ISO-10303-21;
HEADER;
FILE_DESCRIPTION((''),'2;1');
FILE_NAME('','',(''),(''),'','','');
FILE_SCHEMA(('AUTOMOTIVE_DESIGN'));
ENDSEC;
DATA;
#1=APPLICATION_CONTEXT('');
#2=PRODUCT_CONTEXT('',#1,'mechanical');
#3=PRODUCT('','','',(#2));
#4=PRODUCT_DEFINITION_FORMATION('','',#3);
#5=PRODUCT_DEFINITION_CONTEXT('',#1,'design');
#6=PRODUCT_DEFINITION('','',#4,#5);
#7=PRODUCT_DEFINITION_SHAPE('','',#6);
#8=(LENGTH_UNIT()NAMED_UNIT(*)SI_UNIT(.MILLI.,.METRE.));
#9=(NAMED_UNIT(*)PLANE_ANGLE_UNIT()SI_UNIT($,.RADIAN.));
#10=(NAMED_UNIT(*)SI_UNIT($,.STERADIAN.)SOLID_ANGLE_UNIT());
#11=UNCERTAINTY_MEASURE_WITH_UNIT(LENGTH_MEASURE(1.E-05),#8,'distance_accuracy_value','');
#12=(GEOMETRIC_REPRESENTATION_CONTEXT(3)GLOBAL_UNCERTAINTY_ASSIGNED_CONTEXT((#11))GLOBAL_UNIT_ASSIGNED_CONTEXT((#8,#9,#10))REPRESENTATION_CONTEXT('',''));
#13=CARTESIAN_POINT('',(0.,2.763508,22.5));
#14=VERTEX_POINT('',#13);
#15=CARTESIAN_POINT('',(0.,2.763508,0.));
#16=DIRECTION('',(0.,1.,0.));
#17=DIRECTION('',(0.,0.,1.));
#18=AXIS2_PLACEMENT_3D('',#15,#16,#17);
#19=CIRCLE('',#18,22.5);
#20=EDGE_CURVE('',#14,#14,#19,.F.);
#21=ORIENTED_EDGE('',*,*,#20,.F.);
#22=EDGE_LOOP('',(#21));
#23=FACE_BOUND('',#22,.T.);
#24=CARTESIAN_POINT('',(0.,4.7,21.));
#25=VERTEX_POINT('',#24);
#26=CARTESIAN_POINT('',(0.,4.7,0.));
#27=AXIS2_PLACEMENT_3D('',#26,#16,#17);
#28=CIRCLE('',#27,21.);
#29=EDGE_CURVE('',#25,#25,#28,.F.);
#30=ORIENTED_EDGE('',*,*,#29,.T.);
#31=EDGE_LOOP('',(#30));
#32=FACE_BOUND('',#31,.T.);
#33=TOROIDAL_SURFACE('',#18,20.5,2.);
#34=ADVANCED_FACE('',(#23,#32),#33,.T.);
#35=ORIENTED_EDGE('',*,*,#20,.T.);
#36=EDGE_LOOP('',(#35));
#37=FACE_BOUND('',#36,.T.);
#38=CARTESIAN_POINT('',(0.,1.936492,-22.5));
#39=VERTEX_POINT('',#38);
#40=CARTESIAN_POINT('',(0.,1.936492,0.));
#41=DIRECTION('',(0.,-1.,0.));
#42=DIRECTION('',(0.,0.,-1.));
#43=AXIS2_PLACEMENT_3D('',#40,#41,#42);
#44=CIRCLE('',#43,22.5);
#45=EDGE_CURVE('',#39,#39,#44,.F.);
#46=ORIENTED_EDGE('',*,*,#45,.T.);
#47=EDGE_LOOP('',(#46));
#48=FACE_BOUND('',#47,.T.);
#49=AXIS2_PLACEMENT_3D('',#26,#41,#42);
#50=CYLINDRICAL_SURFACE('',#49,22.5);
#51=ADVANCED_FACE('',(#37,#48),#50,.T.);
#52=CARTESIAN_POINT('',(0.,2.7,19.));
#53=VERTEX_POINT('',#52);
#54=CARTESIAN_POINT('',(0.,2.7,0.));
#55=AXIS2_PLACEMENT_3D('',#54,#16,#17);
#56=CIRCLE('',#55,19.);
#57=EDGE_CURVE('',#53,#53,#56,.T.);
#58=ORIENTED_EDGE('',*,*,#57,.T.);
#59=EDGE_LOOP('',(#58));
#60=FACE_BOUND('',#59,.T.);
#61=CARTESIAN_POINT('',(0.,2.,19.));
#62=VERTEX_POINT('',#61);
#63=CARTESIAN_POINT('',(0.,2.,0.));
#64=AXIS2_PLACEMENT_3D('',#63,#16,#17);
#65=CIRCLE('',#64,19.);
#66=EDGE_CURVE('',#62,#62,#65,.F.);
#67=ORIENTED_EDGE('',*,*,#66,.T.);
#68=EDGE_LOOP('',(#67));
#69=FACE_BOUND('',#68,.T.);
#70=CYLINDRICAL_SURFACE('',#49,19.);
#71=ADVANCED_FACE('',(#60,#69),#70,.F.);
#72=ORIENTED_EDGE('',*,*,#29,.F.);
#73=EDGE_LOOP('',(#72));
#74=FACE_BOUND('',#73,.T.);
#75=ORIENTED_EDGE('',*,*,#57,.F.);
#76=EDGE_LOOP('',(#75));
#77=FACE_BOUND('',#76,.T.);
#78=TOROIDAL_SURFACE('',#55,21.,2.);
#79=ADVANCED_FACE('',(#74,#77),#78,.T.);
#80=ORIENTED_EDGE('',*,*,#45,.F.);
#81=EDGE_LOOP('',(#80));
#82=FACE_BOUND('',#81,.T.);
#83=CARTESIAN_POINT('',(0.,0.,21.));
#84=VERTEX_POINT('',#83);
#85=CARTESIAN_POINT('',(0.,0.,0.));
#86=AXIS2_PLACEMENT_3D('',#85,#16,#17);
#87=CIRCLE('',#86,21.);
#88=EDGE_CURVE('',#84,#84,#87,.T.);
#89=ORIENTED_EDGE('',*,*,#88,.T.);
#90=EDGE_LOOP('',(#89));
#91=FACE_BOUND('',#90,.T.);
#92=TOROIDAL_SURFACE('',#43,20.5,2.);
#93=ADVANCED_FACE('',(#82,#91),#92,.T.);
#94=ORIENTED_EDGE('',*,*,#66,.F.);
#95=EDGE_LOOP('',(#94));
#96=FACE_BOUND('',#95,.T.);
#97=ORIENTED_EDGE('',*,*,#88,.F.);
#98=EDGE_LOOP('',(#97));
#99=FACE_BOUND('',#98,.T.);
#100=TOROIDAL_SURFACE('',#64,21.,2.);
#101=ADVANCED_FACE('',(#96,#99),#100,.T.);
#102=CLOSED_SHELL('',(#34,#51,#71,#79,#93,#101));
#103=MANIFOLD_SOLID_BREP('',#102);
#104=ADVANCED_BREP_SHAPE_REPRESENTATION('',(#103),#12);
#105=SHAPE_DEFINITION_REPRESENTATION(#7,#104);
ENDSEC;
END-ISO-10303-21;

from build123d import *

# Parameters (mm, degrees)
SKETCH3_R           = 22.5
SKETCH3_R_2         = 19
BOSS_EXTRUDE1_DEPTH = 4.7
FILLET1_R           = 2
FILLET2_R           = 2


with BuildPart() as part:
    # Sketch3 → Boss-Extrude1 (new body)
    with BuildSketch(Plane(origin=(0, 0, 0), x_dir=(1, 0, 0), z_dir=(0, 1, 0))):
        with Locations(Location((0, 0, 0), (0, 0, 270))):
            Circle(SKETCH3_R)
        with Locations(Location((0, 0, 0), (0, 0, 270))):
            Circle(SKETCH3_R_2, mode=Mode.SUBTRACT)
    extrude(amount=BOSS_EXTRUDE1_DEPTH)

    # Fillet1
    fillet1_edges = [part.edges().sort_by_distance(p)[0] for p in [
        (0, 0, -19),
        (0, 4.7, -19),
    ]]
    fillet(fillet1_edges, radius=FILLET1_R)

    # Fillet2
    # the kernel refuses this fillet: 2 mm, written as the material it takes off along each edge
    with BuildSketch(Plane(origin=(0, 0, 0), x_dir=(0, 0, 1), z_dir=(-1, 0, 0))) as fillet2_piece_1:
        with BuildLine():
            CenterArc((20.5, 1.936491673), FILLET2_R, 284.477512186, 75.522487814)
            Line((22.5, 1.936491673), (22.54, 1.936491673))
            Line((22.54, 1.936491673), (22.54, 0))
            Line((22.54, 0), (22.5, -0.04))
            ThreePointArc((22.5, -0.04), (21.75, -0.04), (21.01, -0.038729833))
            Line((21.01, -0.038729833), (21, 0))
        make_face()
    revolve(axis=Axis((0, 0, 0), (0, 1, 0)), mode=Mode.SUBTRACT)
    with BuildSketch(Plane(origin=(0, 4.7, 0), x_dir=(0, 0, 1), z_dir=(-1, 0, 0))) as fillet2_piece_2:
        with BuildLine():
            CenterArc((20.5, -1.936491673), FILLET2_R, 0, 75.522487814)
            Line((22.5, -1.936491673), (22.54, -1.936491673))
            Line((22.54, -1.936491673), (22.54, 0))
            Line((22.54, 0), (22.5, 0.04))
            ThreePointArc((22.5, 0.04), (21.75, 0.04), (21.01, 0.038729833))
            Line((21.01, 0.038729833), (21, 0))
        make_face()
    revolve(axis=Axis((0, 4.7, 0), (0, 1, 0)), mode=Mode.SUBTRACT)


solid = part.part
